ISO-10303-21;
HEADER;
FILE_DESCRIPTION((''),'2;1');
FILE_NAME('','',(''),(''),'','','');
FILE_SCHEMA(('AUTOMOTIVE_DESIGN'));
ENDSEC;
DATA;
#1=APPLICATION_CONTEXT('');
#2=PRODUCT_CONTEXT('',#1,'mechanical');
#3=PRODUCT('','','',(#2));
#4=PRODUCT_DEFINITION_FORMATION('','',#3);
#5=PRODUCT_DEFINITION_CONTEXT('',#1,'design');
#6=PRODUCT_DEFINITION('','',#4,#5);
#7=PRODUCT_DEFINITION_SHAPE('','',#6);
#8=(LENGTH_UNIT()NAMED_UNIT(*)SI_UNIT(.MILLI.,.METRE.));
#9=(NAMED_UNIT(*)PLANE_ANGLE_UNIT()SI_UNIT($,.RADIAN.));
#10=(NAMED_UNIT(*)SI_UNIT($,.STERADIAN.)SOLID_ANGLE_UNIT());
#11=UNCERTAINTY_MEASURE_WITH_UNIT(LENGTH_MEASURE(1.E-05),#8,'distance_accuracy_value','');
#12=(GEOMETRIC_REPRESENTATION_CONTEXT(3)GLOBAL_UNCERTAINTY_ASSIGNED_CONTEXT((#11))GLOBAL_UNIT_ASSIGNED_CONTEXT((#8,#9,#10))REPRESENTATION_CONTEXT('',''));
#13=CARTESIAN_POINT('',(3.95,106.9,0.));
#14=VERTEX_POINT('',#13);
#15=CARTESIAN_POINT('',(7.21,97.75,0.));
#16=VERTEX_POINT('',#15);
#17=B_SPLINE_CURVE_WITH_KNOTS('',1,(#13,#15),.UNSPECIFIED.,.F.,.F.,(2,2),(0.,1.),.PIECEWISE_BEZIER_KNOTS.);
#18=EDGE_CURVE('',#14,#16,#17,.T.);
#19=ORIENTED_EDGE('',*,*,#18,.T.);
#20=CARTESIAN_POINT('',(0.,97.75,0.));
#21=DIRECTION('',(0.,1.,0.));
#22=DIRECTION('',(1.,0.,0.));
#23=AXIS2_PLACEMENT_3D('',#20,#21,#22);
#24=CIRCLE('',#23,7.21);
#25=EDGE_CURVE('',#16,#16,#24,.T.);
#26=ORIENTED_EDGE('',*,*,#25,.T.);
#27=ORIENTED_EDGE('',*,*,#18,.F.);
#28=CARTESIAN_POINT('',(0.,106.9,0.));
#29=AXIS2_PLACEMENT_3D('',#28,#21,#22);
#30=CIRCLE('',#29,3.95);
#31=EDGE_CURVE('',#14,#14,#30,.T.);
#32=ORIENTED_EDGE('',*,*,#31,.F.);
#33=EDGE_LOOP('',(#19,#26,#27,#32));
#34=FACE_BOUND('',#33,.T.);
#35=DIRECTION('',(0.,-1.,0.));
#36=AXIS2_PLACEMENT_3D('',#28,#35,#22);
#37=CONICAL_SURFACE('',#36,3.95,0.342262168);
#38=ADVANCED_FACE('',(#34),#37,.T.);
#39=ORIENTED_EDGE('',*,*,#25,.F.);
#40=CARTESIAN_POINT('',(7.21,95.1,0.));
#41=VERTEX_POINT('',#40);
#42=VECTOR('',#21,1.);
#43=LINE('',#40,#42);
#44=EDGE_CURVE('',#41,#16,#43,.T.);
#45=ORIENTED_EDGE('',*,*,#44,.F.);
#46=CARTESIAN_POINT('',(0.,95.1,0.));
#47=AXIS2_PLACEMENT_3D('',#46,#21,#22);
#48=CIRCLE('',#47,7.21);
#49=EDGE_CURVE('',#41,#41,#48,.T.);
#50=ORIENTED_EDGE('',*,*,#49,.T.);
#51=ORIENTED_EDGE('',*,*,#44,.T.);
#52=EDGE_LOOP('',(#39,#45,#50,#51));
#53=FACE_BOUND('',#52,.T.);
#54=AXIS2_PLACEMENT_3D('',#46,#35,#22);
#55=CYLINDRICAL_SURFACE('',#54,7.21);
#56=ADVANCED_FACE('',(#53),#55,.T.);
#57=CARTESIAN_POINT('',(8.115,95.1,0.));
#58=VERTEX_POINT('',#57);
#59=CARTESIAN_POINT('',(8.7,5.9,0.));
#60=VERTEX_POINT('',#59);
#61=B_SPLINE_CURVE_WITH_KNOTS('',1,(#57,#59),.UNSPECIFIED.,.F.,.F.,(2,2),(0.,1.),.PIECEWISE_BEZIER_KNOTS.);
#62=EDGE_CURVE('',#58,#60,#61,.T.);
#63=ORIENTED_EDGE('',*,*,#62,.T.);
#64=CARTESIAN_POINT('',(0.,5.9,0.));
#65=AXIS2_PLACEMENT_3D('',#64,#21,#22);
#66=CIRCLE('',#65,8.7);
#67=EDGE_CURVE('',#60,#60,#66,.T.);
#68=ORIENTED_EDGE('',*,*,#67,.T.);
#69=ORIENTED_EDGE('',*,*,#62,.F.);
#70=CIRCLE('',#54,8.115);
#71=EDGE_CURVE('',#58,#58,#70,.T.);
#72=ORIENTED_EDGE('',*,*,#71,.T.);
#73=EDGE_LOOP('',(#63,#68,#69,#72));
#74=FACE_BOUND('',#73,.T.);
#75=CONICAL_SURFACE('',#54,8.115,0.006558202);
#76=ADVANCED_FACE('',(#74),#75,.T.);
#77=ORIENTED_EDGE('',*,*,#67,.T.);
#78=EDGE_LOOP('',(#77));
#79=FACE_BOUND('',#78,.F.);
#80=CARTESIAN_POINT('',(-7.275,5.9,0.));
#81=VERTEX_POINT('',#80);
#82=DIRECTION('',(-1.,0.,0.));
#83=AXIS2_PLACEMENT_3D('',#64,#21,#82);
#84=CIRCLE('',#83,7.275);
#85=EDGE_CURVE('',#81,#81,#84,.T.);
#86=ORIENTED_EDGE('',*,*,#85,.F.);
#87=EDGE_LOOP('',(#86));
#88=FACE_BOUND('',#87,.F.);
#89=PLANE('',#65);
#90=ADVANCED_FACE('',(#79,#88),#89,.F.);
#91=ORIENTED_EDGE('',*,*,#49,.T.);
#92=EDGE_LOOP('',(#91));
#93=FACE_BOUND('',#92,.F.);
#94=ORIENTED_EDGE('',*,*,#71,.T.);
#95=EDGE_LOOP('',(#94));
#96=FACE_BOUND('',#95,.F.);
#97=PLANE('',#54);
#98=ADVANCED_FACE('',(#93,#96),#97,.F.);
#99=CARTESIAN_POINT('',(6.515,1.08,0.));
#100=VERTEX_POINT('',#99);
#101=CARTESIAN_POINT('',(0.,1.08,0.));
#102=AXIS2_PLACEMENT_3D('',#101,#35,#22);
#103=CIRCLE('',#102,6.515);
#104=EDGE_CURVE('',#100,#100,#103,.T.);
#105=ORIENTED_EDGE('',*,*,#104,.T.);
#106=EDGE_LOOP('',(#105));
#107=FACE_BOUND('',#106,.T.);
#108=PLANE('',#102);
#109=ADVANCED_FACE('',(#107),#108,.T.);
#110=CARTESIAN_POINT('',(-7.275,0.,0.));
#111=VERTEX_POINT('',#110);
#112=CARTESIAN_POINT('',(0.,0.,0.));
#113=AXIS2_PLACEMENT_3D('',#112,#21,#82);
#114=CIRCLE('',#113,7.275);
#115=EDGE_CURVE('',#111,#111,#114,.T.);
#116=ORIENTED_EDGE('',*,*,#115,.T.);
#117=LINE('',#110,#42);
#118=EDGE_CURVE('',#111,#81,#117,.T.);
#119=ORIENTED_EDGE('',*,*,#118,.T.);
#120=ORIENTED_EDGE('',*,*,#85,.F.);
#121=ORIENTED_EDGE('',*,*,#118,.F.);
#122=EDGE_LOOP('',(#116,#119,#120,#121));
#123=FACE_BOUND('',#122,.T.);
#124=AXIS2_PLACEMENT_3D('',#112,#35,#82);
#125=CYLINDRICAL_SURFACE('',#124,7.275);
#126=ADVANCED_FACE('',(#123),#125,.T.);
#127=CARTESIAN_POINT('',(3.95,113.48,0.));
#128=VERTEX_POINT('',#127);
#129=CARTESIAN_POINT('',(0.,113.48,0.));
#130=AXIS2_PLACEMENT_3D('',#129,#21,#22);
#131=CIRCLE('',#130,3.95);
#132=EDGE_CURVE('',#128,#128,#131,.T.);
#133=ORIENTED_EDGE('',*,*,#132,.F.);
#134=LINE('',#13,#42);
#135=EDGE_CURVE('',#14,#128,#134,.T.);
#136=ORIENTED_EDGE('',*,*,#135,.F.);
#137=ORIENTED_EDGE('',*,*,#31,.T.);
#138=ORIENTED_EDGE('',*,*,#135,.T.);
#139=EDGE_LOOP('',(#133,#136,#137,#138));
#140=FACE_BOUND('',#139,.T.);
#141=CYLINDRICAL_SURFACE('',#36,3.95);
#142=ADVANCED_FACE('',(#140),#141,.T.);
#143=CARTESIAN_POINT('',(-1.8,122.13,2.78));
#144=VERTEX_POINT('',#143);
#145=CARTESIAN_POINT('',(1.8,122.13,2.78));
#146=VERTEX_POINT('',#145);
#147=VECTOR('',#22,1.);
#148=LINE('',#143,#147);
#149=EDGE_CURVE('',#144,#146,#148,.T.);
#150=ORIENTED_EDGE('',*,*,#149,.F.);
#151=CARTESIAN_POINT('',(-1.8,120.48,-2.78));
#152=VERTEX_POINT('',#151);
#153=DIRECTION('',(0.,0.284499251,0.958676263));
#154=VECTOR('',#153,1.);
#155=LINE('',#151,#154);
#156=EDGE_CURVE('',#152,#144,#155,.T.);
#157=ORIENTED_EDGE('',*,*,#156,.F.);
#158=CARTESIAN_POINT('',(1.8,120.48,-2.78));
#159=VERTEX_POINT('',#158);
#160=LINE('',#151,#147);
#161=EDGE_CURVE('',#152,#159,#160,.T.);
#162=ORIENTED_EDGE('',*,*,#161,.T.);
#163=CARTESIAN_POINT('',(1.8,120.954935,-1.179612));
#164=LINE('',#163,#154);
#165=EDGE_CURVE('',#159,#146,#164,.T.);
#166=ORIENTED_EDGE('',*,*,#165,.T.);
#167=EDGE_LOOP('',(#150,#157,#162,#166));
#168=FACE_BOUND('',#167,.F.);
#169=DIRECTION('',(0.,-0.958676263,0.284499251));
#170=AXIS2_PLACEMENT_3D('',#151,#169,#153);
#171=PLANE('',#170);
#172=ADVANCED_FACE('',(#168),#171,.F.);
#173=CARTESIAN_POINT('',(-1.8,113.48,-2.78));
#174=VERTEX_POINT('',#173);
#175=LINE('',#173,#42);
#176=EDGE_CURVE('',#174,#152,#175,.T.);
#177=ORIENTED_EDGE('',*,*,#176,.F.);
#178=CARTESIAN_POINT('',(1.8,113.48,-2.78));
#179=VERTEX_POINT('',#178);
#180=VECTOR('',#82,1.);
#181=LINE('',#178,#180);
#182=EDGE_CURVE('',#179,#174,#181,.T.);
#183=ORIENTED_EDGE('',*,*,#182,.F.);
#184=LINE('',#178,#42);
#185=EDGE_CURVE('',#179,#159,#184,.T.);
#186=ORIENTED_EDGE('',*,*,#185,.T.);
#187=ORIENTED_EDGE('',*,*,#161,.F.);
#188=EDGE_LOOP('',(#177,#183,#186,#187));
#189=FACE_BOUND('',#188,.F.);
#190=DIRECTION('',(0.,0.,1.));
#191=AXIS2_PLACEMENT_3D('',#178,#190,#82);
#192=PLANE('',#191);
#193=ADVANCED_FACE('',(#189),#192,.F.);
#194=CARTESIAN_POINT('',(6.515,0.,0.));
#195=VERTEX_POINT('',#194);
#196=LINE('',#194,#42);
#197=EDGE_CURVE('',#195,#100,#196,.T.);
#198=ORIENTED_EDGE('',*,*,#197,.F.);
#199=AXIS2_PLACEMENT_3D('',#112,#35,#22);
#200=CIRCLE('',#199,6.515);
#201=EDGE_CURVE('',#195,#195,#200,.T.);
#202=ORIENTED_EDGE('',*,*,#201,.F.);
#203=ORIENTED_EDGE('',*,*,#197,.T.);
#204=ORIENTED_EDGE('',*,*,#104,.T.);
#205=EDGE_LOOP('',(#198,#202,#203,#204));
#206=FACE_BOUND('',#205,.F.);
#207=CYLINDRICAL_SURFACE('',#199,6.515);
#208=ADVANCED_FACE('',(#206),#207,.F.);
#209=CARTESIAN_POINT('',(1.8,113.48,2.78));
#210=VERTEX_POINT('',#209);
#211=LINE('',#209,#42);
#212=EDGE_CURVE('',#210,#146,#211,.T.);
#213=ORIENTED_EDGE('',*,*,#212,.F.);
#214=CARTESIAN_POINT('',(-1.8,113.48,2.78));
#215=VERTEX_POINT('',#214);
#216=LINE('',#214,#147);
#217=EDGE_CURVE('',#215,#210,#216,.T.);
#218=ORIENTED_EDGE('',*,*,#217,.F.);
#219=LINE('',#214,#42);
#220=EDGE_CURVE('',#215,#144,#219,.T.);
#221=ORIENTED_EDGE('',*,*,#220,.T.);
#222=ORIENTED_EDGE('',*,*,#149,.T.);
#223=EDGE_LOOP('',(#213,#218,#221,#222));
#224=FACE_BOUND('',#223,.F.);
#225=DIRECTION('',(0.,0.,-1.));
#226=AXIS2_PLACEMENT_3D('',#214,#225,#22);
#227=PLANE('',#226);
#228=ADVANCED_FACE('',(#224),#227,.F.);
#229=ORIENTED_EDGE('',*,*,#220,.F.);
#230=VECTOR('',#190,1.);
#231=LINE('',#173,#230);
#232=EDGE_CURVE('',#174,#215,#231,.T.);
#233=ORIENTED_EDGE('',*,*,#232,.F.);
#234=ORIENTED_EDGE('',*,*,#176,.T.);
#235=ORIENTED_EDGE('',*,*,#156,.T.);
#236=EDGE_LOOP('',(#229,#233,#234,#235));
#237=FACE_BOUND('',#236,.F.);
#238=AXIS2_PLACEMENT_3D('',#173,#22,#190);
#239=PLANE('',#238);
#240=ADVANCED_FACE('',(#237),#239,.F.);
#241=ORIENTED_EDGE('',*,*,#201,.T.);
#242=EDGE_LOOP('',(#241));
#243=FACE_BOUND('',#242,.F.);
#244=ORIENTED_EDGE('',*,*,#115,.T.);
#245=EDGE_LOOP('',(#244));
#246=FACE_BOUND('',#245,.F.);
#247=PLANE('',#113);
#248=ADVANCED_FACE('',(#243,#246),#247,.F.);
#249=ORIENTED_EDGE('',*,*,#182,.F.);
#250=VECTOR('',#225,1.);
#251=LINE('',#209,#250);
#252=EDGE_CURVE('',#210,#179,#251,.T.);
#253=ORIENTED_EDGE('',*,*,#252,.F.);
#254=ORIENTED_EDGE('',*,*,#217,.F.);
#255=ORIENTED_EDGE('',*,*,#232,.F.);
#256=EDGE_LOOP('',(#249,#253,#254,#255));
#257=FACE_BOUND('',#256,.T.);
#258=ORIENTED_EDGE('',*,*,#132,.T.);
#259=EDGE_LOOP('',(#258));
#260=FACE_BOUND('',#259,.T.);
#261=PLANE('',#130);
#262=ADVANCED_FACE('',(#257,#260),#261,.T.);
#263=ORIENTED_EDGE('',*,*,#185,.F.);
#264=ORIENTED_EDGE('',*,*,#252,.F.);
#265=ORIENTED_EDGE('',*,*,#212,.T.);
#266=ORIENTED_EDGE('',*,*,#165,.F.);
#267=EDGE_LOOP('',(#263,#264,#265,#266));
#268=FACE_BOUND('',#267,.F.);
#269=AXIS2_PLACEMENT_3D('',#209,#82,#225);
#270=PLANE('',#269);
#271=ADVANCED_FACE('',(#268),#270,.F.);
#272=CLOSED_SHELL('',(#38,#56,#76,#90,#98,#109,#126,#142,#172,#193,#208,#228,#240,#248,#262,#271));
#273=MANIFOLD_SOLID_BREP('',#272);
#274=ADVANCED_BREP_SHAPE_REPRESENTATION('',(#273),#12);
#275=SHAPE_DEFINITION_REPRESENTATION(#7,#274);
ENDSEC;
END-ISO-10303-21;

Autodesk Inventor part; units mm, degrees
ref_plane "YZ Plane" through (0, 0, 0) normal (1, 0, 0) x (0, 1, 0)
sketch "Boceto1" plane through (0, 0, 0) normal (0, 1, 0) x (-1, 0, 0)
  circle A0 centre (0, 0) radius 7.275
  circle A1 centre (0, 0) radius 8.7
  dimension "d0" = 14.55
  dimension "d1" = 17.4
extrude "Extrusión1" add sketch "Boceto1" along normal blind 5.9 contours A0
sketch "Boceto2" plane through (0, 5.9, 0) normal (0, 1, 0) x (1, 0, 0)
  circle A0 centre (0, 0) radius 8.7
  dimension "d5" = 17.4
ref_plane "Plano de trabajo1" through (0, 95.1, 0) normal (0, -1, 0) x (1, 0, 0)
sketch "Boceto3" plane through (0, 95.1, 0) normal (0, -1, 0) x (1, 0, 0)
  circle A0 centre (0, 0) radius 8.115
  dimension "d7" = 16.23
loft "Solevación1" add profiles "Boceto3", "Boceto2"
sketch "Boceto4" plane through (0, 0, 0) normal (0, -1, 0) x (1, 0, 0)
  circle A0 centre (0, 0) radius 7.275
  circle A1 centre (0, 0) radius 6.515
  dimension "d12" = 13.03
extrude "Extrusión2" cut sketch "Boceto4" against normal blind 1.08 contours A1
sketch "Boceto5" plane through (0, 95.1, 0) normal (0, 1, 0) x (1, 0, 0)
  circle A0 centre (0, 0) radius 7.21
  dimension "d15" = 14.42
extrude "Extrusión3" add sketch "Boceto5" along normal blind 2.65
ref_plane "Plano de trabajo2" through (0, 106.9, 0) normal (0, 1, 0) x (1, 0, 0)
sketch "Boceto6" plane through (0, 106.9, 0) normal (0, 1, 0) x (1, 0, 0)
  circle A0 centre (0, 0) radius 3.95
  dimension "d19" = 7.9
loft "Solevación2" add profiles "Boceto6" section 2 edges at (-7.21, 97.75, 0)
sketch "Boceto7" plane through (0, 106.9, 0) normal (0, 1, 0) x (1, 0, 0)
  circle A0 centre (0, 0) radius 3.95
extrude "Extrusión4" add sketch "Boceto7" along normal blind 6.58
sketch "Boceto8" plane through (0, 113.48, 0) normal (0, 1, 0) x (1, 0, 0)
  line L0 (1.8, 2.78) -> (-1.8, 2.78)
  line L1 (-1.8, 2.78) -> (-1.8, -2.78)
  line L2 (-1.8, -2.78) -> (1.8, -2.78)
  line L3 (1.8, -2.78) -> (1.8, 2.78)
  circle A0 centre (0, 0) radius 3.95 projected
  line L4 (1.8, 2.78) -> (-1.8, -2.78) construction
  line L5 (-1.8, 2.78) -> (1.8, -2.78) construction
  dimension "d26" = 3.6
  dimension "d27" = 5.56
extrude "Extrusión5" add sketch "Boceto8" along normal blind 8.65 contours L3 L2 L1 L0
sketch "Boceto9" plane through (-1.8, 113.48, -2.78) normal (-1, 0, 0) x (0, 0, 1)
  line L0 (0, 0) -> (0, 8.65) projected
  line L1 (0, 0) -> (0, 7)
  line L2 (0, 8.65) -> (5.56, 8.65) projected
  line L3 (0, 7) -> (5.56, 8.65)
  point P0 (2.78, -113.48)
  dimension "d30" = 7
extrude "Extrusión6" cut sketch "Boceto9" against normal blind 8.65
properties part number "MARCADOR"
